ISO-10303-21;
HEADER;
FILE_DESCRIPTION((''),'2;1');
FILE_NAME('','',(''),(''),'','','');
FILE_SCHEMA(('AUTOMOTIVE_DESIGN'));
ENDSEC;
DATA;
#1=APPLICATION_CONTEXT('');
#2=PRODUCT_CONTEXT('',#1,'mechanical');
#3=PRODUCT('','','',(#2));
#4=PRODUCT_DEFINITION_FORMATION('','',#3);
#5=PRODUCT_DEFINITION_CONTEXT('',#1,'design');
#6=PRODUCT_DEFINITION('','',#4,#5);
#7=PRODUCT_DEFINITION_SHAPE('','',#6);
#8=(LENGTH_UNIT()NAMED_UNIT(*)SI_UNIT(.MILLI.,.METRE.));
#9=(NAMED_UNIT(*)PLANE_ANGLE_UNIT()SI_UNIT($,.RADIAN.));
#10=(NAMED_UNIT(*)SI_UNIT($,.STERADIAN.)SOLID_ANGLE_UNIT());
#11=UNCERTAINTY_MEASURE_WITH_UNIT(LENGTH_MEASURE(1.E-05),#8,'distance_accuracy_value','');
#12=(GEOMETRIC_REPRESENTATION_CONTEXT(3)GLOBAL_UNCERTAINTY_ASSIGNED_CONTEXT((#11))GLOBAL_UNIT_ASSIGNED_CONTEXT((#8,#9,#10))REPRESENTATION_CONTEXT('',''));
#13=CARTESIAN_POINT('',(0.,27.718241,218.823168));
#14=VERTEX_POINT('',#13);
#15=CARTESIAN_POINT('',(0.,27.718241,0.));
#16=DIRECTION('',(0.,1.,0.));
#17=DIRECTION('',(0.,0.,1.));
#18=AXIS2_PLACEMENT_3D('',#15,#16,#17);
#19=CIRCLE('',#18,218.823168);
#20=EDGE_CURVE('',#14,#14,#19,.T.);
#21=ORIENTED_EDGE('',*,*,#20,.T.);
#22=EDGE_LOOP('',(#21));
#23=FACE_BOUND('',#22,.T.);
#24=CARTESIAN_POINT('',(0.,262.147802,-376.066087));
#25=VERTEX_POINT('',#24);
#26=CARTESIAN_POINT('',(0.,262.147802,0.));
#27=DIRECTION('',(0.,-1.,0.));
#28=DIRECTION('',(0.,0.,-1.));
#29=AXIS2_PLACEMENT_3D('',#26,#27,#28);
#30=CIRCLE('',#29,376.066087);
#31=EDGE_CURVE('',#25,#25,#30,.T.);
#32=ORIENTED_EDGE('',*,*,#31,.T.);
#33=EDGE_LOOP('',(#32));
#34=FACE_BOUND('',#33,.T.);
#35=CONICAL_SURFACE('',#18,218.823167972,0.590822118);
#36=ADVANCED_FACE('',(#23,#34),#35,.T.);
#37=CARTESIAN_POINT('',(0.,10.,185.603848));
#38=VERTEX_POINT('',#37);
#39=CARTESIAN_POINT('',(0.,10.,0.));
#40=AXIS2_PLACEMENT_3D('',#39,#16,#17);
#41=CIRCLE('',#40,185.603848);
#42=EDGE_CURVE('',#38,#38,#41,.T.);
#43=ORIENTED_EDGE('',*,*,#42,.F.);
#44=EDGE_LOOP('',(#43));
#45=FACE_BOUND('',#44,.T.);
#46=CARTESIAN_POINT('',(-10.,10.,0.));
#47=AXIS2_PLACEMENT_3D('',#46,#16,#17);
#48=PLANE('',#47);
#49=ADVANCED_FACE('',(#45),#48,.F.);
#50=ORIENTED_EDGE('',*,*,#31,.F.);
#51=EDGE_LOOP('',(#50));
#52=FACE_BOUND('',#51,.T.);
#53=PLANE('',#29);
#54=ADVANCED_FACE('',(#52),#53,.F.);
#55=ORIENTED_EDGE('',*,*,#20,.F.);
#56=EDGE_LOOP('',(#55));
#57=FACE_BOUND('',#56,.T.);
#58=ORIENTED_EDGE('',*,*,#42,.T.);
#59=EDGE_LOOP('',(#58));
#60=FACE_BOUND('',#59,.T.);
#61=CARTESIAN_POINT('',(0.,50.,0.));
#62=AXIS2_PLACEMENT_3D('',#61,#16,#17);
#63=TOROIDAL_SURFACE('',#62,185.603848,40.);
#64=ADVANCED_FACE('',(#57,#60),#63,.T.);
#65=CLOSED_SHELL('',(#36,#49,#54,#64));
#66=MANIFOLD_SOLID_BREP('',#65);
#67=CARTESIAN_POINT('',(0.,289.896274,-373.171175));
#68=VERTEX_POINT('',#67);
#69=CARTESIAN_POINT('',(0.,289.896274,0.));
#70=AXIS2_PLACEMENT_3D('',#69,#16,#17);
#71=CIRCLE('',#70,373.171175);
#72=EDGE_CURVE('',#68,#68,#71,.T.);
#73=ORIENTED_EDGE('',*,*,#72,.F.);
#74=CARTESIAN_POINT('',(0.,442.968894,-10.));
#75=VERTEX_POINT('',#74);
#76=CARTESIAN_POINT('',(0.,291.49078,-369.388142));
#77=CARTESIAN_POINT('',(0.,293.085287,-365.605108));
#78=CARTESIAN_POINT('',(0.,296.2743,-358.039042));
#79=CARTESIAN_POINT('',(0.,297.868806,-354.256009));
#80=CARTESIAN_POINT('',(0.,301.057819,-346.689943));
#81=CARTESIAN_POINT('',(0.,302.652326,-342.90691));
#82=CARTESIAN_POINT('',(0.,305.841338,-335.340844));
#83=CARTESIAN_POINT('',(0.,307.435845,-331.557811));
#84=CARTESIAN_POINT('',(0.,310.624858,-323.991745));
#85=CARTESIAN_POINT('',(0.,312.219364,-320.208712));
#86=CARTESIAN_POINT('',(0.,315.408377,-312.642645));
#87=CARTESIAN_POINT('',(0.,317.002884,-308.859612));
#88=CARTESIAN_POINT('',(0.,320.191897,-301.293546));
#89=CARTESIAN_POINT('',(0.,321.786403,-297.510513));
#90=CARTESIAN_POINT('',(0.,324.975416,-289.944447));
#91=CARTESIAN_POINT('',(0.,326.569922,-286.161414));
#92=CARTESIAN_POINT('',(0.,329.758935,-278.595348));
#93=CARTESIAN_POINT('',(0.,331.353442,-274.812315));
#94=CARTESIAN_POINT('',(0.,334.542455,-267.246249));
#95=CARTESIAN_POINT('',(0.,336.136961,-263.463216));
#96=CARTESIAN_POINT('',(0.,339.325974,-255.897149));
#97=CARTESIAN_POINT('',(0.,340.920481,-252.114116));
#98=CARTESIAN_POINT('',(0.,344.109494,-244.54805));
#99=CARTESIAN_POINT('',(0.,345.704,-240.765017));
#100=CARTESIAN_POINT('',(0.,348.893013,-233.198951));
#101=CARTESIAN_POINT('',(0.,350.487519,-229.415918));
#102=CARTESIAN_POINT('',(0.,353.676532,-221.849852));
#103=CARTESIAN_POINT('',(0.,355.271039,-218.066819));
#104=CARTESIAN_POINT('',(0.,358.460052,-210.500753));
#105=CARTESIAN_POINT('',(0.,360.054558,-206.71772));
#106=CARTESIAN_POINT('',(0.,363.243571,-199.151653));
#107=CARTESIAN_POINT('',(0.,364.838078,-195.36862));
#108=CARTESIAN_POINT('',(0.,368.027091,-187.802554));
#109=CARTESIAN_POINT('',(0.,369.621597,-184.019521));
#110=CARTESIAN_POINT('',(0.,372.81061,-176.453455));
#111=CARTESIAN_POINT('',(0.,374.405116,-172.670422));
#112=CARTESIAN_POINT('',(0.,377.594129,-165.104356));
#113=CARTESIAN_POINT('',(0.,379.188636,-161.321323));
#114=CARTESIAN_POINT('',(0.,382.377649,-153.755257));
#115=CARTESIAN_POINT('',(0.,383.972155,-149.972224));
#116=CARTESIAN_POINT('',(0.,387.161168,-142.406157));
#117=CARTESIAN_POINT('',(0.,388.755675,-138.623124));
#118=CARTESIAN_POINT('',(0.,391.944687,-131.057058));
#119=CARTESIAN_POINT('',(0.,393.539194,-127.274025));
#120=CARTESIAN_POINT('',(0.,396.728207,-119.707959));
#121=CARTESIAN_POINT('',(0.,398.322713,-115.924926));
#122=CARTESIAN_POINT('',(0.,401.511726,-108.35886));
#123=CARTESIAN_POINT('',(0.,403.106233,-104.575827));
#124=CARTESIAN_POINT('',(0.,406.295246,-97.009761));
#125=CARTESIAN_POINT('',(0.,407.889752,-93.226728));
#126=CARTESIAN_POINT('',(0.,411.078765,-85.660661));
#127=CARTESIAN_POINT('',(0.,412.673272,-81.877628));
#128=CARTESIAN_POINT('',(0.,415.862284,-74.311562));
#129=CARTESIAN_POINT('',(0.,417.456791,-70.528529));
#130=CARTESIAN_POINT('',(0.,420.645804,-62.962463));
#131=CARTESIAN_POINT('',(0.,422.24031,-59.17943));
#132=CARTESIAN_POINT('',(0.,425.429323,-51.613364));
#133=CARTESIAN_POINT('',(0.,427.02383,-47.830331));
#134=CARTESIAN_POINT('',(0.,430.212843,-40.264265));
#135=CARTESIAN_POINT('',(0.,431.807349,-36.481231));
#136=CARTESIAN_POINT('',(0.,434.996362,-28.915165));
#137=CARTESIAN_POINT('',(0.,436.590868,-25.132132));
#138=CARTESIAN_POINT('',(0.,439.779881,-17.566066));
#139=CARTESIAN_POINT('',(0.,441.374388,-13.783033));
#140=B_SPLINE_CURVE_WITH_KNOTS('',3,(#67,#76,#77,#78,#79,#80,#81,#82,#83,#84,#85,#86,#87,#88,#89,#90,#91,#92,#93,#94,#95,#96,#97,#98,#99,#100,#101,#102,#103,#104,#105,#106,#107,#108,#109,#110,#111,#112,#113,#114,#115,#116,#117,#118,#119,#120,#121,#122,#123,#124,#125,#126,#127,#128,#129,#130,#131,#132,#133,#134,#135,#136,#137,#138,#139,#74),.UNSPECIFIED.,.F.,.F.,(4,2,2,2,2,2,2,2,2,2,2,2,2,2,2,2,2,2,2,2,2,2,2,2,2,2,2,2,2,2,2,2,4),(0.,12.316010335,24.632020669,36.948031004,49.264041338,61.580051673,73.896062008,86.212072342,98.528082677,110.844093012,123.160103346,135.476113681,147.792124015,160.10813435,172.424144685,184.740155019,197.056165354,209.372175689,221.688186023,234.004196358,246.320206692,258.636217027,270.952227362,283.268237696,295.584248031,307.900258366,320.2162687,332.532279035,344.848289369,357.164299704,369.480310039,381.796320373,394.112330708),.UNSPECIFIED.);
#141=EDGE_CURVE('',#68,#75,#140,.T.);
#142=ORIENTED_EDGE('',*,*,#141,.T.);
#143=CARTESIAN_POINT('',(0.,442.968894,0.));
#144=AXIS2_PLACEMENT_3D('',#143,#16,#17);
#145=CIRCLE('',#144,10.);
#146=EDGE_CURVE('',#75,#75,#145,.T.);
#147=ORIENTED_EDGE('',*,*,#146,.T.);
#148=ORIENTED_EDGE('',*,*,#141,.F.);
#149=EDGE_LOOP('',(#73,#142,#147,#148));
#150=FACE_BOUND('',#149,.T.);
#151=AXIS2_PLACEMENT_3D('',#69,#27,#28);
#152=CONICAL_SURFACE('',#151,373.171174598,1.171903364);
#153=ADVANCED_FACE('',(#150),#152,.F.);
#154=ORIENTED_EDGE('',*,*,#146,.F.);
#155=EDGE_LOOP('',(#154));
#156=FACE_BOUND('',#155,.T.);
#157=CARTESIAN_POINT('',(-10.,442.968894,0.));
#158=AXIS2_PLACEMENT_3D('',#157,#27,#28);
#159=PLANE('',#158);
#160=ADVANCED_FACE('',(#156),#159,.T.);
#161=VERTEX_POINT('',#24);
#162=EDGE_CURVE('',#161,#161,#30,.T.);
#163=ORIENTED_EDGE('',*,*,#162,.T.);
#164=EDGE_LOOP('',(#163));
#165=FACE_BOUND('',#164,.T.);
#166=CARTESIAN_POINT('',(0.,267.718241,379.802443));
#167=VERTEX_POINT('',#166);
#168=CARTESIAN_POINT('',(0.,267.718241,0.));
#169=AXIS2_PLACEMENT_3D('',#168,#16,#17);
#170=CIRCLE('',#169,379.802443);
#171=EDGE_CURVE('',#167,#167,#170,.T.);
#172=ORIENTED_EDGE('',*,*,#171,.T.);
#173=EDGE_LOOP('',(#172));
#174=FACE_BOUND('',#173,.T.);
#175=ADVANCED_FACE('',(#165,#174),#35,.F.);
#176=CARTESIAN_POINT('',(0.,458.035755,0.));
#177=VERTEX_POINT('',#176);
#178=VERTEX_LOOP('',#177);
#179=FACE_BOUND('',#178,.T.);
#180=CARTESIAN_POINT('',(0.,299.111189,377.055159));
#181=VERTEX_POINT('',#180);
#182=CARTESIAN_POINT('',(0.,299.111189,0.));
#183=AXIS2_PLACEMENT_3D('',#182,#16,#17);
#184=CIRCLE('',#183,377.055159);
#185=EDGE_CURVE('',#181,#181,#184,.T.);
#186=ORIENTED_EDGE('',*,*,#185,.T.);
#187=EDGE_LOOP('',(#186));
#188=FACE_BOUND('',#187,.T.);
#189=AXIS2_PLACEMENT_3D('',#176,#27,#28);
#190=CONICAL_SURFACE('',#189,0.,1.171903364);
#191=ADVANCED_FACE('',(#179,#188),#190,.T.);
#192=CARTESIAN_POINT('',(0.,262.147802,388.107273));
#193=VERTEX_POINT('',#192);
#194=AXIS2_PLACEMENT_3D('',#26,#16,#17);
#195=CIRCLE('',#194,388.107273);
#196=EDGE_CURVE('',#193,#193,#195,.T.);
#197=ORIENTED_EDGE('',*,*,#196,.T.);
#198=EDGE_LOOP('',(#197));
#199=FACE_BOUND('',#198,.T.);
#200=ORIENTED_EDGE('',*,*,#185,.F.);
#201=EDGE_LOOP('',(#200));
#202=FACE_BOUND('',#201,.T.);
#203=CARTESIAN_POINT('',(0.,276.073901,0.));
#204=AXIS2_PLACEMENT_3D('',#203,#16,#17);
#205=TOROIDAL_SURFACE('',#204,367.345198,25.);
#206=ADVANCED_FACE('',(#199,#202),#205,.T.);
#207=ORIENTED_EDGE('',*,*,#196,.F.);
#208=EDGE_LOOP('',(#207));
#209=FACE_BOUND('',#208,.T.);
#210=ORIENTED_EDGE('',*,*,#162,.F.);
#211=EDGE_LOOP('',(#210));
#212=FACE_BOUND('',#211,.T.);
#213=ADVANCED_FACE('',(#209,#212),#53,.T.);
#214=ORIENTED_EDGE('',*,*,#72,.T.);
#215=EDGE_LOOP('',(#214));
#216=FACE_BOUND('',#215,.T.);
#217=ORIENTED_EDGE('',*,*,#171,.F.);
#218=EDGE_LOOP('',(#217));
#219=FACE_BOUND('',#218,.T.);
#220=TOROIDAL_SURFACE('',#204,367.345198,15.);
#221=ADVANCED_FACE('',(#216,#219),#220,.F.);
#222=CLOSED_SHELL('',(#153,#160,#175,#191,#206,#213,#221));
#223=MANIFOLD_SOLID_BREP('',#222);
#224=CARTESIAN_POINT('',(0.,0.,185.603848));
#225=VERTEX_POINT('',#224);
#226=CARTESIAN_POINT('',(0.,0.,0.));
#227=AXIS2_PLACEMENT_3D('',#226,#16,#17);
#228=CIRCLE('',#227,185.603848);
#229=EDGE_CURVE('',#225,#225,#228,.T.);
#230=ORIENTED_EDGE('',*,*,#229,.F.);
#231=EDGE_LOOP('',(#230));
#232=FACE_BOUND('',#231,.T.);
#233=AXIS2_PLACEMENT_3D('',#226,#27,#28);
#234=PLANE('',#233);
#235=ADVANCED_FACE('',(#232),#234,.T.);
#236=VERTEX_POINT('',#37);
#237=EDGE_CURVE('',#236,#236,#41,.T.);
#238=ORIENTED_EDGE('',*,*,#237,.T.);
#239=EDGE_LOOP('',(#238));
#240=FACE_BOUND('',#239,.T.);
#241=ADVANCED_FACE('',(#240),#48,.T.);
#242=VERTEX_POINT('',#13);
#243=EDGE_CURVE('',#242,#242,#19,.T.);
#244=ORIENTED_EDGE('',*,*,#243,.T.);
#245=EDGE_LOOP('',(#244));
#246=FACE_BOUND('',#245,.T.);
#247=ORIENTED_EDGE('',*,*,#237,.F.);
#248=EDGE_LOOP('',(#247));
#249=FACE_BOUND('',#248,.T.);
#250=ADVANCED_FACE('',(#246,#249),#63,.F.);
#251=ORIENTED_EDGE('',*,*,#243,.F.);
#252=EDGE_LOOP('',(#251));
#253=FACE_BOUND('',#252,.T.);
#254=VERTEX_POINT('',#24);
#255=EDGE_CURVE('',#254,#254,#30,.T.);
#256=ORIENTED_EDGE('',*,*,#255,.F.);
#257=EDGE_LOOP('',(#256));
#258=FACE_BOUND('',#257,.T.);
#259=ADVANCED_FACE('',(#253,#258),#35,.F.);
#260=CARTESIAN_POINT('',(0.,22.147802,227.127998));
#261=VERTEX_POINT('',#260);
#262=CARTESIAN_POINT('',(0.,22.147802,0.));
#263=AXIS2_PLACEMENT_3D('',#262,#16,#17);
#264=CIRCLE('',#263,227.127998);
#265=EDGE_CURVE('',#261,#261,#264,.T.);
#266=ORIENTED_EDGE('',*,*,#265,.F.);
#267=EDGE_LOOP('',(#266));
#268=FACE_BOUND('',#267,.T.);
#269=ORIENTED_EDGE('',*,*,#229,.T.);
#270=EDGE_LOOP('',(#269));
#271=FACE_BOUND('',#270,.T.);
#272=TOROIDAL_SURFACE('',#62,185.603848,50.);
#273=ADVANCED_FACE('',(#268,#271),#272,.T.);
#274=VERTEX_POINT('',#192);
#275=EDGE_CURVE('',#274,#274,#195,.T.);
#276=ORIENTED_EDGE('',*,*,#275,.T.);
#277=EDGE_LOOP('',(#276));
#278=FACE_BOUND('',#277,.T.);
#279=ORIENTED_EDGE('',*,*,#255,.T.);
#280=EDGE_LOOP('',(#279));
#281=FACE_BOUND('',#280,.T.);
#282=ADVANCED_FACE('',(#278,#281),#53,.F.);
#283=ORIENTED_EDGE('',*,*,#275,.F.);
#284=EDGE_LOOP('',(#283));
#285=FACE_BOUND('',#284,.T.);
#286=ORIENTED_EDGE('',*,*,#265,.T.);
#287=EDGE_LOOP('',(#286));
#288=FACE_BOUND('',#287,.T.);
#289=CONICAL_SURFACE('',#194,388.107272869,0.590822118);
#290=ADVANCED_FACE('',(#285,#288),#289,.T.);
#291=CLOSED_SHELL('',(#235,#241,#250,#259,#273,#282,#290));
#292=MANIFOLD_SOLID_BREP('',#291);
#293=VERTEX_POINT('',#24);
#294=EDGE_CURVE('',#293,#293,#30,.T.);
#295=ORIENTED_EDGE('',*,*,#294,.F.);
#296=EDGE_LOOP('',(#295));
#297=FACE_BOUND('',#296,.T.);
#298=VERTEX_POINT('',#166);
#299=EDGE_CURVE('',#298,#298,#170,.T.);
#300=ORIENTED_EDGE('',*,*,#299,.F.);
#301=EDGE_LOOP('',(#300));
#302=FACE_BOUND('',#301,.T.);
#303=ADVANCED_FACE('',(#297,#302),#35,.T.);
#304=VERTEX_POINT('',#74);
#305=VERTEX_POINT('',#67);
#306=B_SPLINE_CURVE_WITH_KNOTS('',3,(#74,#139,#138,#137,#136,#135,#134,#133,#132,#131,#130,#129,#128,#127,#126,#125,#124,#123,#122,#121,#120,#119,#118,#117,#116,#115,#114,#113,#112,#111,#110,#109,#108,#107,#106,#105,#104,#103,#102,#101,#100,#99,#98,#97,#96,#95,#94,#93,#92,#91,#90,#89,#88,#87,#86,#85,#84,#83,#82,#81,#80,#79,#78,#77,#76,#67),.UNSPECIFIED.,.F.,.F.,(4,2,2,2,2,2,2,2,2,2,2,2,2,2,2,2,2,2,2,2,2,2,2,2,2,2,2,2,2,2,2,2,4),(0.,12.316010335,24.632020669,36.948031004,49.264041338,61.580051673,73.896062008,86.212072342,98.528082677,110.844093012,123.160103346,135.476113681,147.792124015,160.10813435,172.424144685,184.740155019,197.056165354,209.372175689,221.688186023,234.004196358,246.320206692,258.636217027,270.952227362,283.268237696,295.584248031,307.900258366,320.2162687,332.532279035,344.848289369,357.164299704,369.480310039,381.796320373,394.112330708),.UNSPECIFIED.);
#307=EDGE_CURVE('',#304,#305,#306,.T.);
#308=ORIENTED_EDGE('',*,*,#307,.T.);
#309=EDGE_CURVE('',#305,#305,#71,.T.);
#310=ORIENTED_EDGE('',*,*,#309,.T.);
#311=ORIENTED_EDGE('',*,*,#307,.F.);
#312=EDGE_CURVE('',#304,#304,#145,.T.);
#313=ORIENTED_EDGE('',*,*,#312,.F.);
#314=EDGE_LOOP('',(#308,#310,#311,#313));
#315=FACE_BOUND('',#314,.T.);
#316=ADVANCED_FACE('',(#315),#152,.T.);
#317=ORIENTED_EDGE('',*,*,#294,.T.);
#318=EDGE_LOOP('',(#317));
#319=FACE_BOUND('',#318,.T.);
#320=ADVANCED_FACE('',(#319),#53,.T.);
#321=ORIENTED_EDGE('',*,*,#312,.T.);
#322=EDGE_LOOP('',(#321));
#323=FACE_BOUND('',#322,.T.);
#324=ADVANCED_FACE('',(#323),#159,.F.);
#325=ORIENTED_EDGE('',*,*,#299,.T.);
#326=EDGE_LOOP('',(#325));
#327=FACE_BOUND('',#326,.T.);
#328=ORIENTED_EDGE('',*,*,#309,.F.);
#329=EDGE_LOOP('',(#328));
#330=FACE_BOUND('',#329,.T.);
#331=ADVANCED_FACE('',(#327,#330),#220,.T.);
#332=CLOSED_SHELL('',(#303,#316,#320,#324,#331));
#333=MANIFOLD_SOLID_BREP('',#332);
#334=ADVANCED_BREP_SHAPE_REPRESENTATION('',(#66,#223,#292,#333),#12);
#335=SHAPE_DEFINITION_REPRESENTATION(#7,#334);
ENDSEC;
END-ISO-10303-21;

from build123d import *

# Parameters (mm, degrees)
INTERSECT2_START       = 262.147801711
INTERSECT2_3_OUTLINE_W = 788
INTERSECT2_3_OUTLINE_H = 788
INTERSECT2_3_DEPTH     = 195.887953468


# Read off the part's stored shape, not the designer's step: Intersect2
with BuildPart() as part:
    # Sketch1 → Revolve1 (revolve)
    with BuildSketch(Plane.XY, mode=Mode.PRIVATE) as revolve1_sk:
        with BuildLine():
            Line((0, 0), (-185.603847806, 0))
            ThreePointArc((-185.603847806, 0), (-209.13457331, 5.883053628), (-227.127998013, 22.147801711))
            Line((-227.127998013, 22.147801711), (-388.107272869, 262.147801711))
            ThreePointArc((-388.107272869, 262.147801711), (-391.297426344, 283.235656654), (-377.055159153, 299.111189104))
            Line((-377.055159153, 299.111189104), (0, 458.035755079))
            Line((0, 458.035755079), (0, 442.968894339))
            Line((0, 442.968894339), (-10, 442.968894339))
            Line((-10, 442.968894339), (-373.171174598, 289.896273805))
            ThreePointArc((-373.171174598, 289.896273805), (-381.716534912, 280.370954335), (-379.802442828, 267.718241369))
            Line((-379.802442828, 267.718241369), (-218.823167972, 27.718241369))
            ThreePointArc((-218.823167972, 27.718241369), (-204.42842821, 14.706442902), (-185.603847806, 10))
            Line((-185.603847806, 10), (-10, 10))
            Line((-10, 10), (0, 10))
            Line((0, 10), (0, 0))
        make_face()
    revolve(revolve1_sk.sketch.rotate(Axis((0, 599.304151963, 0), (0, -1, 0)), 270), axis=Axis((0, 599.304151963, 0), (0, -1, 0)))

    # Intersect2 3 outline → Intersect2 3 (cut)
    with BuildSketch(Plane(origin=(0, 0, 0), x_dir=(1, 0, 0), z_dir=(0, 1, 0)).offset(INTERSECT2_START)):
        Rectangle(INTERSECT2_3_OUTLINE_W, INTERSECT2_3_OUTLINE_H)
    extrude(amount=INTERSECT2_3_DEPTH, mode=Mode.SUBTRACT)


with BuildPart() as body_2:
    # Intersect2 outline → Intersect2 (revolve)
    with BuildSketch(Plane.XY):
        with BuildLine():
            Line((379.802442828, 267.718241369), (376.066087258, 262.147801711))
            Line((376.066087258, 262.147801711), (388.107272869, 262.147801711))
            ThreePointArc((388.107272869, 262.147801711), (391.297426344, 283.235656654), (377.055159153, 299.111189104))
            Line((377.055159153, 299.111189104), (0, 458.035755079))
            Line((0, 458.035755079), (0, 442.968894339))
            Line((0, 442.968894339), (10, 442.968894339))
            Line((10, 442.968894339), (373.171174598, 289.896273805))
            ThreePointArc((373.171174598, 289.896273805), (381.716534912, 280.370954335), (379.802442828, 267.718241369))
        make_face()
    revolve(axis=Axis((0, 0, 0), (0, 1, 0)))


with BuildPart() as body_3:
    # Intersect2 2 outline → Intersect2 2 (revolve)
    with BuildSketch(Plane.XY):
        with BuildLine():
            Line((0, 262.147801711), (376.066087258, 262.147801711))
            Line((376.066087258, 262.147801711), (379.802442828, 267.718241369))
            ThreePointArc((379.802442828, 267.718241369), (381.716534912, 280.370954335), (373.171174598, 289.896273805))
            Line((373.171174598, 289.896273805), (10, 442.968894339))
            Line((10, 442.968894339), (0, 442.968894339))
            Line((0, 442.968894339), (0, 262.147801711))
        make_face()
    revolve(axis=Axis((0, 0, 0), (0, 1, 0)))


with BuildPart() as body_4:
    # Intersect2 4 outline → Intersect2 4 (revolve)
    with BuildSketch(Plane.XY):
        with BuildLine():
            Line((0, 262.147801711), (0, 10))
            Line((0, 10), (185.603847806, 10))
            ThreePointArc((185.603847806, 10), (204.42842821, 14.706442902), (218.823167972, 27.718241369))
            Line((218.823167972, 27.718241369), (376.066087258, 262.147801711))
            Line((376.066087258, 262.147801711), (0, 262.147801711))
        make_face()
    revolve(axis=Axis((0, 0, 0), (0, 1, 0)))


solid = Compound([part.part, body_2.part, body_3.part, body_4.part])
